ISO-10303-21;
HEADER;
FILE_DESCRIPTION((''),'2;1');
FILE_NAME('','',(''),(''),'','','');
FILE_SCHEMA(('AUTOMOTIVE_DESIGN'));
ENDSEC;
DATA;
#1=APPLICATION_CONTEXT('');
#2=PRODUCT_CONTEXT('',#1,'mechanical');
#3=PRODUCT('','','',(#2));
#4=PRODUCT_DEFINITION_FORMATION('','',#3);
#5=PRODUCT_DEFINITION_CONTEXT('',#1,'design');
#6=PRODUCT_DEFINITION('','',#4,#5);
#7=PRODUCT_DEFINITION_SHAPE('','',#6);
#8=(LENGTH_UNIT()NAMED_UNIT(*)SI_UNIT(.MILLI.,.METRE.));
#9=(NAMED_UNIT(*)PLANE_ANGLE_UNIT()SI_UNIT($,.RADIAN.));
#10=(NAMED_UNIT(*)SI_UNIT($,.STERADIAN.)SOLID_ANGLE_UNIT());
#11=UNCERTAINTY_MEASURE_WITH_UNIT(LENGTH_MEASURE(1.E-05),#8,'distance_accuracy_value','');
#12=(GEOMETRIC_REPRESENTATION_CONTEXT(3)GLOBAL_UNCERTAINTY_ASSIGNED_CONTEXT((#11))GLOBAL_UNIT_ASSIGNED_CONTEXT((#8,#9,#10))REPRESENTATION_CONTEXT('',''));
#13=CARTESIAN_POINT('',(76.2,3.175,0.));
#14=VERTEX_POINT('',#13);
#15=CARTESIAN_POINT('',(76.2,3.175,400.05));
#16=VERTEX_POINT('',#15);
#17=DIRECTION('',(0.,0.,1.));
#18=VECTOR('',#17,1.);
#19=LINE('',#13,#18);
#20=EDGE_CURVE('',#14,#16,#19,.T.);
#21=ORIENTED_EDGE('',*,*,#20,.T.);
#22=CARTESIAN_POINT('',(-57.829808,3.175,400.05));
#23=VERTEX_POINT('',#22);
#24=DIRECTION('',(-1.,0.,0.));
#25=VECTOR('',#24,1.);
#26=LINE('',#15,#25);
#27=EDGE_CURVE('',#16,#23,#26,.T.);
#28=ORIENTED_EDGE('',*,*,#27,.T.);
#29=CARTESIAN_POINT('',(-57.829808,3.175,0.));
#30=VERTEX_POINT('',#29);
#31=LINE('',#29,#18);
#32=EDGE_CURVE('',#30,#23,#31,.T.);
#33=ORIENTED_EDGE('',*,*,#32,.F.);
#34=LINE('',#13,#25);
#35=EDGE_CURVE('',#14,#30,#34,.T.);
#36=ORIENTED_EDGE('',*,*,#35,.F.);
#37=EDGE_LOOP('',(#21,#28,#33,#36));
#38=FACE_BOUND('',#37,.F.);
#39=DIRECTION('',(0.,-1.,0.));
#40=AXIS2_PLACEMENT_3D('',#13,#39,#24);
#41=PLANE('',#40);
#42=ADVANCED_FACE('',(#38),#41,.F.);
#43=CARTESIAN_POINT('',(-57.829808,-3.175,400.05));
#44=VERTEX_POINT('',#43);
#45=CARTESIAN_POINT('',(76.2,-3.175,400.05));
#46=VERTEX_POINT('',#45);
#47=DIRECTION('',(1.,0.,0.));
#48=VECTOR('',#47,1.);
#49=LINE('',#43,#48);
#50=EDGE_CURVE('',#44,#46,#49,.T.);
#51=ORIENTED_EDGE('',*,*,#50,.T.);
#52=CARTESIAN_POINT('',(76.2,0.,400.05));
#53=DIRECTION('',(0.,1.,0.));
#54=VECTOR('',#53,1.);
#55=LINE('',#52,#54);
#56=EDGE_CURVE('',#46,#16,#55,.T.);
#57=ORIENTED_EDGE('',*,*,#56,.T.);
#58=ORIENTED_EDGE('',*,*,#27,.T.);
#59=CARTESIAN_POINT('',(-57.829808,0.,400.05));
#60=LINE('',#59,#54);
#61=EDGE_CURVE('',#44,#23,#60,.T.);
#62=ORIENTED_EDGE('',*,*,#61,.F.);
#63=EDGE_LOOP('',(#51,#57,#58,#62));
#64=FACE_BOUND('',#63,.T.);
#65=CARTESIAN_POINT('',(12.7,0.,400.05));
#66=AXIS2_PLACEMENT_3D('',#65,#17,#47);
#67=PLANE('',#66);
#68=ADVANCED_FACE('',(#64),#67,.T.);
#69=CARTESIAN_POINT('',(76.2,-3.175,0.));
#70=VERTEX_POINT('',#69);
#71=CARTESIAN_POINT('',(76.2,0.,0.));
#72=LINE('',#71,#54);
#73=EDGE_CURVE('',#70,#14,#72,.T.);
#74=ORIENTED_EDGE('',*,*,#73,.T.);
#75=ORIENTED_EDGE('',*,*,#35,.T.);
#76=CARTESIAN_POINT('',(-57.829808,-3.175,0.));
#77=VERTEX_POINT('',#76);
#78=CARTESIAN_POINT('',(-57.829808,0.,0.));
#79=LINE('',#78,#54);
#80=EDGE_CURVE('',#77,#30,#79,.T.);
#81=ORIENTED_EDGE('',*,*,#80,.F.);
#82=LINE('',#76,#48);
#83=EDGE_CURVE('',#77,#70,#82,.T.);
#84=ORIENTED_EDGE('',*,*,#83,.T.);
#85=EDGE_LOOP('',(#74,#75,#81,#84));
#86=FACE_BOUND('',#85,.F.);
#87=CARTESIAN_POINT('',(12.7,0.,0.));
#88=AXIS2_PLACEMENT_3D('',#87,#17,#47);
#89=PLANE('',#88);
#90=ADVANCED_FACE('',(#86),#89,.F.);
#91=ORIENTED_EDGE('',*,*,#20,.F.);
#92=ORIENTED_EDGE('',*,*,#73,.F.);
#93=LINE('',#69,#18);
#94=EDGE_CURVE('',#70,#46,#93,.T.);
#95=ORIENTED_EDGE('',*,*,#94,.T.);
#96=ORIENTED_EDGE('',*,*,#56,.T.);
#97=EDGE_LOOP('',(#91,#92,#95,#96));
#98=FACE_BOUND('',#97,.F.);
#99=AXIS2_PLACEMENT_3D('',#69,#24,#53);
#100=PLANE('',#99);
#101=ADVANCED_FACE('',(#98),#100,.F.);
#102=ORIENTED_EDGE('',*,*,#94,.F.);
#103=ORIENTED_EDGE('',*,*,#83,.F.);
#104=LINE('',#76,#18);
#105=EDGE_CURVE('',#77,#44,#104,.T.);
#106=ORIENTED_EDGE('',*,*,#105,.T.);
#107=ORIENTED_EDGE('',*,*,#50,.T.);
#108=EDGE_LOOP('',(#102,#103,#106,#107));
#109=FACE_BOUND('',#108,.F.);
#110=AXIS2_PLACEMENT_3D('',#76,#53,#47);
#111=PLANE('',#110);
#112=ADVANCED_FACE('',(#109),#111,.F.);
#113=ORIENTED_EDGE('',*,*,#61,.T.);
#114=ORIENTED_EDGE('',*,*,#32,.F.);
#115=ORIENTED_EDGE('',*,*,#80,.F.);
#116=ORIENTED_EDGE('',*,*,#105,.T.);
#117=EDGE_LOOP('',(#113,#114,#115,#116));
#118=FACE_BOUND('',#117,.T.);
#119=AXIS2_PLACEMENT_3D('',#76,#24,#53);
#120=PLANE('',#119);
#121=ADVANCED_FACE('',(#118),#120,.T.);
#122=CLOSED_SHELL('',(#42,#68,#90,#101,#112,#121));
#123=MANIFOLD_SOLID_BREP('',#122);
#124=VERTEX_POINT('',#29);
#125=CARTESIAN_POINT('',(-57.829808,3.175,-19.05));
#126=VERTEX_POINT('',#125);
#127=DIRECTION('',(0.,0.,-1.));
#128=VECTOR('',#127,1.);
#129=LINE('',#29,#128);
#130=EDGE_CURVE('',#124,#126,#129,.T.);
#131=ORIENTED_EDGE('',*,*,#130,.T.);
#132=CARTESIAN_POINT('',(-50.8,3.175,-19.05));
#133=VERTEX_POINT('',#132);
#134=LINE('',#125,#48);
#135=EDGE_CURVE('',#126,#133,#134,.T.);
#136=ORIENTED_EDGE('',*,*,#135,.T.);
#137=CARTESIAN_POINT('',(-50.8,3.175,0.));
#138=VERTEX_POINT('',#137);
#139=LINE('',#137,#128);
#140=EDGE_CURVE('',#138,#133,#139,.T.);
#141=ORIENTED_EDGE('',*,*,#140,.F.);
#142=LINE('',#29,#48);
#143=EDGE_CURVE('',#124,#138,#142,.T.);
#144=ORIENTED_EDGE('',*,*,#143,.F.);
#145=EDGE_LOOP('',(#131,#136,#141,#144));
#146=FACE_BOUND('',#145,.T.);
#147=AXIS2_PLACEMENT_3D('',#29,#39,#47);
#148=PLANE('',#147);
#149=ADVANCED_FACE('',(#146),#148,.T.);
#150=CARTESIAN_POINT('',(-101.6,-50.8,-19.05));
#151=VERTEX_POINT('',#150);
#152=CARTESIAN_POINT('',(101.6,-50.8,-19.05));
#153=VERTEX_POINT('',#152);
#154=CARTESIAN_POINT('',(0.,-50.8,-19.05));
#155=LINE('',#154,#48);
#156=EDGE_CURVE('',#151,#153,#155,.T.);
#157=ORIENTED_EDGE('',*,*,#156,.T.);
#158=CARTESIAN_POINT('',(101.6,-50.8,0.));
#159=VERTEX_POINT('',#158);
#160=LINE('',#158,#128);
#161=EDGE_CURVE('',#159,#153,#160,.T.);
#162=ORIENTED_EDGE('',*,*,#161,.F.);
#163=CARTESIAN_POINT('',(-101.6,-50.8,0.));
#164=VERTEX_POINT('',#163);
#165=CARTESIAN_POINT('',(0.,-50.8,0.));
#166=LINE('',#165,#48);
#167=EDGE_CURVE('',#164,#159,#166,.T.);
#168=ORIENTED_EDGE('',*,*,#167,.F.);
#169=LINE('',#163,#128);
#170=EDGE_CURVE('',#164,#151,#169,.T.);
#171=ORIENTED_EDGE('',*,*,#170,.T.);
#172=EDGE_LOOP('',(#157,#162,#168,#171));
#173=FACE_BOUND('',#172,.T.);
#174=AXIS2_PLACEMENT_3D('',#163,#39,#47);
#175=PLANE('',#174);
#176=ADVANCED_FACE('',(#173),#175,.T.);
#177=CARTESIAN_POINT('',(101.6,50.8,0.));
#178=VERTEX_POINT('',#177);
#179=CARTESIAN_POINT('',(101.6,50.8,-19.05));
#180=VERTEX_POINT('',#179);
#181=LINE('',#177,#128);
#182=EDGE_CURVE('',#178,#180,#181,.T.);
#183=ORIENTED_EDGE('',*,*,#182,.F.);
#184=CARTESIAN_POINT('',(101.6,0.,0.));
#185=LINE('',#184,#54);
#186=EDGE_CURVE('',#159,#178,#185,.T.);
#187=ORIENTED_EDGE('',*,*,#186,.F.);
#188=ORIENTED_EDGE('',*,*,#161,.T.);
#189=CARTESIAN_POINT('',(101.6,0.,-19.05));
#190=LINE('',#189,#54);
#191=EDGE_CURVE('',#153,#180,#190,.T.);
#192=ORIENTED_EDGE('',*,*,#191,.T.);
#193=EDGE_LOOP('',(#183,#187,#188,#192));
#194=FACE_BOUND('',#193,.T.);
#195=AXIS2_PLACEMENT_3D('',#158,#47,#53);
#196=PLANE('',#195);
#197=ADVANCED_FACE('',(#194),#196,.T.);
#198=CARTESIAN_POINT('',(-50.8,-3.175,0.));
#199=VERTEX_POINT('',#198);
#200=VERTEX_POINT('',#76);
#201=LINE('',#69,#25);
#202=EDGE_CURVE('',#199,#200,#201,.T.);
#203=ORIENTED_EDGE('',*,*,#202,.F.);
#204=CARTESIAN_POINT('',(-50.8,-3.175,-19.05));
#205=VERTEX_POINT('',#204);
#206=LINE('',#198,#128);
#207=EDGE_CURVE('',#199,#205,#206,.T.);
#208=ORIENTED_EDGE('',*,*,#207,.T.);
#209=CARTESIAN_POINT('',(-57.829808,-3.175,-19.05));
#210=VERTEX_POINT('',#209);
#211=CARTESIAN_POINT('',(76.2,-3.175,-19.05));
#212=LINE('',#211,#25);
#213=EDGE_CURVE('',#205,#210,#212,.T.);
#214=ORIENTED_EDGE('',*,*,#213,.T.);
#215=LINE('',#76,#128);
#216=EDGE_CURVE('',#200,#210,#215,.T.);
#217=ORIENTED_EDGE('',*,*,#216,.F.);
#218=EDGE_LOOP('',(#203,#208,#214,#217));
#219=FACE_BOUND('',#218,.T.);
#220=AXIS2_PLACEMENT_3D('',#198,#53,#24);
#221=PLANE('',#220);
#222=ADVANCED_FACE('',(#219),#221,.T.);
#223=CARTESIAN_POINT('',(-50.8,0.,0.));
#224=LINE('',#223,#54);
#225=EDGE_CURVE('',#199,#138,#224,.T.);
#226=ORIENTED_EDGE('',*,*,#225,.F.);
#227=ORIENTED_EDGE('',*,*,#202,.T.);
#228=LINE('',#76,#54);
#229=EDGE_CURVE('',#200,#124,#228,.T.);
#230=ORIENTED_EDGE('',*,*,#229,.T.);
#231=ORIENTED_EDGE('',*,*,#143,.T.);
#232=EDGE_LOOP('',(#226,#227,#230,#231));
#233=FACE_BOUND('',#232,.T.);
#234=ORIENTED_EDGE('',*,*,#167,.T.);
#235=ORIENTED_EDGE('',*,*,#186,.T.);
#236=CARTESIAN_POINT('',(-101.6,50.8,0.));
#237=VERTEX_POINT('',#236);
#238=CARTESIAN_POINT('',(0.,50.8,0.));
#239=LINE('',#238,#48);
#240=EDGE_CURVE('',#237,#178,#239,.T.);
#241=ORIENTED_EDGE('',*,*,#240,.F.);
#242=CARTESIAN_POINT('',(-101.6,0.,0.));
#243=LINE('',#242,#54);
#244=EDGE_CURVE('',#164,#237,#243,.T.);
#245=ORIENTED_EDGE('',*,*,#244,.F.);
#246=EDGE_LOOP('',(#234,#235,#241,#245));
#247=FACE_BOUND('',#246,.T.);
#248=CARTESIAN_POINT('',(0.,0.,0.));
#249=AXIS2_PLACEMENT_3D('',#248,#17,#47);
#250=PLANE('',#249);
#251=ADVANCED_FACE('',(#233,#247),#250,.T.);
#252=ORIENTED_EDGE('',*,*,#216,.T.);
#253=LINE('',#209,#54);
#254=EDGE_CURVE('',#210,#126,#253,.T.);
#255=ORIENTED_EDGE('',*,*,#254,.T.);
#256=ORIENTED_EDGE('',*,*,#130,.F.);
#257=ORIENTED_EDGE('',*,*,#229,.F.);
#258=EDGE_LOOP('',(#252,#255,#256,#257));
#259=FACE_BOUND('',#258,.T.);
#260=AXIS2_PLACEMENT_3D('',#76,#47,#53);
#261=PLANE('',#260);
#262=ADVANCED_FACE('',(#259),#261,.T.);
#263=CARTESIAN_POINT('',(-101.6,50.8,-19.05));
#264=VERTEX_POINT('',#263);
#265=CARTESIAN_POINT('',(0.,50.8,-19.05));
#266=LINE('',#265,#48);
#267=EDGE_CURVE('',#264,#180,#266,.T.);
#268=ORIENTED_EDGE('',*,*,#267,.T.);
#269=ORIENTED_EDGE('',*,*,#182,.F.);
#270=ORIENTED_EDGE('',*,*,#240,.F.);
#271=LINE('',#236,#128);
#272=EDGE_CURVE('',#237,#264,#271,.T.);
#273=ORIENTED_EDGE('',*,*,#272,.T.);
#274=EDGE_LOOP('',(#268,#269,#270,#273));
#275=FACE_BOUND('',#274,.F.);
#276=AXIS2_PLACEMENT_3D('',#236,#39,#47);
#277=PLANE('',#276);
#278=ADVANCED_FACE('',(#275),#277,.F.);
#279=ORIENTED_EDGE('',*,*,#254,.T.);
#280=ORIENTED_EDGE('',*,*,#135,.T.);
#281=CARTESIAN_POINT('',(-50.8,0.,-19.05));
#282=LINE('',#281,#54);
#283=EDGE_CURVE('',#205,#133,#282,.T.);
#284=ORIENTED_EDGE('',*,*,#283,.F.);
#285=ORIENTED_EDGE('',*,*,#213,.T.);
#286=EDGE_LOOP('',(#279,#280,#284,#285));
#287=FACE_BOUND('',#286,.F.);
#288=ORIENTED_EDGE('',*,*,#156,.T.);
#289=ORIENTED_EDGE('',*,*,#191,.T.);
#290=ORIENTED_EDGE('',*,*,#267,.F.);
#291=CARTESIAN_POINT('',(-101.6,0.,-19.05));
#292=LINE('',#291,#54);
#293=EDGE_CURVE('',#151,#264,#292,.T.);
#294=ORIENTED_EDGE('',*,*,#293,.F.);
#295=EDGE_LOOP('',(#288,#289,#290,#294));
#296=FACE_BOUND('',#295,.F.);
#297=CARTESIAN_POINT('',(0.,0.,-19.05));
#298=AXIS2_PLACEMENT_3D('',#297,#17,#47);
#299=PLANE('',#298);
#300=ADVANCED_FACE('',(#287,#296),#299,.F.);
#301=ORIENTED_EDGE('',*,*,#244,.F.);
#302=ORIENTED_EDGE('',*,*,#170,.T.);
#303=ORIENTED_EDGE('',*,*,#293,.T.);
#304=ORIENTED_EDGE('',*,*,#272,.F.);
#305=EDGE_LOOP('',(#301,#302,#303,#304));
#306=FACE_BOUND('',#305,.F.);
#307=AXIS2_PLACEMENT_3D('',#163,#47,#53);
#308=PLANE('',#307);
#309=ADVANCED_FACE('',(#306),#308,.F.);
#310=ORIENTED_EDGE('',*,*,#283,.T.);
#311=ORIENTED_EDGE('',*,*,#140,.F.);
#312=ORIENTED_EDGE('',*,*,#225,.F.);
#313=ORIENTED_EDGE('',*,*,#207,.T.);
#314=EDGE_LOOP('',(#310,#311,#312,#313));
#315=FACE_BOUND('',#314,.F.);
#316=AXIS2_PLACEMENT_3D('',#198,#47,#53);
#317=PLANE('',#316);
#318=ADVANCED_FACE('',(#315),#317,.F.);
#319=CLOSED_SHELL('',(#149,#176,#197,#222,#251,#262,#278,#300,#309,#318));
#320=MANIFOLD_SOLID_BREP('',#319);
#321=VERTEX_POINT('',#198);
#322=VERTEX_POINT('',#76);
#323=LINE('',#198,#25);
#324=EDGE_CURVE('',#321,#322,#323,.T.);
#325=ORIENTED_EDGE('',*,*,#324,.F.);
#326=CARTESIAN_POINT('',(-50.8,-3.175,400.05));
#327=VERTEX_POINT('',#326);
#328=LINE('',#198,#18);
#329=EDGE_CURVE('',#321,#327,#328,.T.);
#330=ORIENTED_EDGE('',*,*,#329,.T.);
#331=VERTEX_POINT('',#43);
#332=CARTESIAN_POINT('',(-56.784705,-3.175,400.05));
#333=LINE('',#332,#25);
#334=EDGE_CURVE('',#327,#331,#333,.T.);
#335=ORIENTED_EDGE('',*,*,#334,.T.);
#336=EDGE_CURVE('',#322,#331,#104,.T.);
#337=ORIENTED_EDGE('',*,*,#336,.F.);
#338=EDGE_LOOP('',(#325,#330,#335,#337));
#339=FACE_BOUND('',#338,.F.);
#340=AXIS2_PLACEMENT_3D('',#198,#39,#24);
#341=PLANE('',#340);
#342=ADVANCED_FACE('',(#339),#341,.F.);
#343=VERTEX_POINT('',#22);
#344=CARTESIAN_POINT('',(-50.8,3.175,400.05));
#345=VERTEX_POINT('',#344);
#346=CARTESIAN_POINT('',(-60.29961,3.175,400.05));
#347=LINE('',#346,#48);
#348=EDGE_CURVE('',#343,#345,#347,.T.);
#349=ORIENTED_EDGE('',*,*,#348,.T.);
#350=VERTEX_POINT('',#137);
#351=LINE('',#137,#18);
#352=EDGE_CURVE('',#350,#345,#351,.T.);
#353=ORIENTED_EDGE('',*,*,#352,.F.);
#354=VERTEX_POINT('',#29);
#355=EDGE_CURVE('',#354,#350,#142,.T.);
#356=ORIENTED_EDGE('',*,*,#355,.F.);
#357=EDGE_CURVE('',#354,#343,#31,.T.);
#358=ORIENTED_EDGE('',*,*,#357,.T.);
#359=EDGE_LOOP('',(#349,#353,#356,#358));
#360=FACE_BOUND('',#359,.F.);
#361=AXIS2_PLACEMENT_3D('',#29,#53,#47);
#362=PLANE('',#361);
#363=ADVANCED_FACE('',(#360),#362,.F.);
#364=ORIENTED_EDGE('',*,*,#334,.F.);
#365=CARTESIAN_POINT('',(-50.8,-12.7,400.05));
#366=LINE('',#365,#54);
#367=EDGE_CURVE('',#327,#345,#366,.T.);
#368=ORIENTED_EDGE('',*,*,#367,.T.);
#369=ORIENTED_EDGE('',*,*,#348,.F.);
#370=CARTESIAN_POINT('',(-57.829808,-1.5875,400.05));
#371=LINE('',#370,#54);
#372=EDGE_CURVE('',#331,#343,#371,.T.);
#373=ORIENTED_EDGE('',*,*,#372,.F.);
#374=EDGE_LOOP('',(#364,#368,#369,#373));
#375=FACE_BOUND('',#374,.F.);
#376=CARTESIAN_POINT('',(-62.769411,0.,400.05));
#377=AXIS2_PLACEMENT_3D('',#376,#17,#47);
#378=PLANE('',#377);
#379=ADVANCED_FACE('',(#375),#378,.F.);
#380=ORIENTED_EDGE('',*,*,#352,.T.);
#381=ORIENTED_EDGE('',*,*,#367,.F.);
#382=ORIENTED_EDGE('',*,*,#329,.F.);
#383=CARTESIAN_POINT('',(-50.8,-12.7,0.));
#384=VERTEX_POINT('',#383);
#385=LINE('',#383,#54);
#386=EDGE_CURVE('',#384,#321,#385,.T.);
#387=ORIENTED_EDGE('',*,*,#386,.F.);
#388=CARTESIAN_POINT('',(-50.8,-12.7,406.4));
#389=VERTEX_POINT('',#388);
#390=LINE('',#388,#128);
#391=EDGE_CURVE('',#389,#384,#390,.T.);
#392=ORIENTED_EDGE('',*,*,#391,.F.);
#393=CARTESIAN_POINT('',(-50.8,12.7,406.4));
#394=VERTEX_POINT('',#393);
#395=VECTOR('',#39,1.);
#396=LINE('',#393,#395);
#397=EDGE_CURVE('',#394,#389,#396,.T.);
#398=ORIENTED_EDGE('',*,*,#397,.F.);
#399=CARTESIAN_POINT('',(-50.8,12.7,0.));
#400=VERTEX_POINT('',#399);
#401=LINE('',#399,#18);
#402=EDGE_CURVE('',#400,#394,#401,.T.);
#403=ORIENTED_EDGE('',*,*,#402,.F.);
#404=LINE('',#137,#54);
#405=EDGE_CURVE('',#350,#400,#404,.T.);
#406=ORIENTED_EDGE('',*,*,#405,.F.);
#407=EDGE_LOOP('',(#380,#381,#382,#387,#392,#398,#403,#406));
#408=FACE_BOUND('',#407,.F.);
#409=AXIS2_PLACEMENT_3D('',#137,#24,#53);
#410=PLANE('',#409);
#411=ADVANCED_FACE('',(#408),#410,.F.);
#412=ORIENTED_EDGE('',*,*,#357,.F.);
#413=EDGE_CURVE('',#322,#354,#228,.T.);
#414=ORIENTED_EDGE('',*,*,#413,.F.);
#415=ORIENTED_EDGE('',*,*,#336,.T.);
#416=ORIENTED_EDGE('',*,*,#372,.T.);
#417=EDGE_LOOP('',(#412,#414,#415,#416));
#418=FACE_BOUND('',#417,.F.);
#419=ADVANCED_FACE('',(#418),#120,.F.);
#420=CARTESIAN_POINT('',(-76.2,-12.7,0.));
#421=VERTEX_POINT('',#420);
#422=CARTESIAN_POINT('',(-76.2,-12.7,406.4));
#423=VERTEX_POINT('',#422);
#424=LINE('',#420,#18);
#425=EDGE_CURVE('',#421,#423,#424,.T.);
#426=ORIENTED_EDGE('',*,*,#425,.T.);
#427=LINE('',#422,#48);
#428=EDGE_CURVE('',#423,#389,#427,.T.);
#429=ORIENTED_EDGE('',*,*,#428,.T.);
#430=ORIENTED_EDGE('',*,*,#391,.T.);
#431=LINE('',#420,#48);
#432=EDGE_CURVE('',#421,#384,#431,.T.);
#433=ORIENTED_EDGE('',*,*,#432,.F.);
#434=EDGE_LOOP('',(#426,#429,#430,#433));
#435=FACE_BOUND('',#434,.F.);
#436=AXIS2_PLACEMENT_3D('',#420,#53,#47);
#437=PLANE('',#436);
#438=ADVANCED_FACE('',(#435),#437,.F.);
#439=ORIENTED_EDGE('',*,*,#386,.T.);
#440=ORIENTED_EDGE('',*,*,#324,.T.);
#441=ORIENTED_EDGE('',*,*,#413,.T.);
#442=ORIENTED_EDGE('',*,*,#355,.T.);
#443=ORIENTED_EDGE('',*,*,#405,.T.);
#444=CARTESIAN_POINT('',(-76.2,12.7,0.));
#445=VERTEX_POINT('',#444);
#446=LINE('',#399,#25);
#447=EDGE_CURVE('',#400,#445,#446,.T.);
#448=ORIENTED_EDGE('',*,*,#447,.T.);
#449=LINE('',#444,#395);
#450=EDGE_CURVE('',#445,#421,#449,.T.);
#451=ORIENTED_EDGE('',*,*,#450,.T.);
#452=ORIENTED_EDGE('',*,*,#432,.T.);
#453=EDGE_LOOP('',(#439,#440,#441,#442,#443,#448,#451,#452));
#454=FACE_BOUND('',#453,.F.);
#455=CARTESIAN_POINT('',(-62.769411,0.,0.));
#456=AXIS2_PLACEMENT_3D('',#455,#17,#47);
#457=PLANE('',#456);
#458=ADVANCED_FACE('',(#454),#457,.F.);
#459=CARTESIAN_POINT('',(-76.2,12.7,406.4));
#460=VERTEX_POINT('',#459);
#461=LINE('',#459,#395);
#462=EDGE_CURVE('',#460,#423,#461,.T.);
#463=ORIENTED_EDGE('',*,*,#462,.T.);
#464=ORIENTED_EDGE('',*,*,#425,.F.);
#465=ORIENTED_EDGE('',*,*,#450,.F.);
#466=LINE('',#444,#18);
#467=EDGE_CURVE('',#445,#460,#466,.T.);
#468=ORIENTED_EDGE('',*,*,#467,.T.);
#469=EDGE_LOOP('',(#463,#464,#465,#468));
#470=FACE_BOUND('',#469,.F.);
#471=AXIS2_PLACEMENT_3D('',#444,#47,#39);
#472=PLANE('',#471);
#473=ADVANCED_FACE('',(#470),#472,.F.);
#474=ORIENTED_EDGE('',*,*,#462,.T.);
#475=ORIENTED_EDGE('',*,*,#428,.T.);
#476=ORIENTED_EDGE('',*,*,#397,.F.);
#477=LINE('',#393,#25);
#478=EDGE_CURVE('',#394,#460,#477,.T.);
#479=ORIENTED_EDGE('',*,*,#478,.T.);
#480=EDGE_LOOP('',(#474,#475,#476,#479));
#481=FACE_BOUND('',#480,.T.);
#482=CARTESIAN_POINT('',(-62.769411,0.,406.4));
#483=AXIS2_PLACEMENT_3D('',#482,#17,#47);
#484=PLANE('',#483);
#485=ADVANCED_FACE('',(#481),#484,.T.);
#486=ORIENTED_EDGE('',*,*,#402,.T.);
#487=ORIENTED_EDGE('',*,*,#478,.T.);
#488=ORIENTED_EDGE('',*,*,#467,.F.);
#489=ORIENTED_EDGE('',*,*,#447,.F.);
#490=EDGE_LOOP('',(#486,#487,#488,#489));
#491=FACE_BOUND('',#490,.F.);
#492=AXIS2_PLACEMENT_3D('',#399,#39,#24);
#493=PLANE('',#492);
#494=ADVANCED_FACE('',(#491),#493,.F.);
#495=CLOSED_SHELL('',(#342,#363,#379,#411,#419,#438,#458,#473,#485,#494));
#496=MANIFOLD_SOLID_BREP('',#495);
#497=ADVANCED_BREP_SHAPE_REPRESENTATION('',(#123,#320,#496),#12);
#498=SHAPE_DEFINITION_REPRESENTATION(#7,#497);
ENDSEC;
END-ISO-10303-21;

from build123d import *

# Parameters (mm, degrees)
F0_W     = 203.2
F0_H     = 101.6
F0_W_2   = 127
F0_H_2   = 6.35
F1_DEPTH = 19.05
F2_DEPTH = 406.4
F0_W_3   = 7.0298084438
F3_DEPTH = 400.05
F4_W     = 7.0298084438
F4_H     = 6.35
F5_DEPTH = 6.35


with BuildPart() as f1:
    # F0 (on Top) → F1 (new body)
    with BuildSketch(Plane.XY):
        Rectangle(F0_W, F0_H)
        Polygon((-76.2, 12.7), (-50.8, 12.7), (-50.8, 3.175), (76.2, 3.175), (76.2, -3.175), (-50.8, -3.175), (-50.8, -12.7), (-76.2, -12.7), align=None, mode=Mode.SUBTRACT)
        Polygon((-50.8, 3.175), (-50.8, 12.7), (-76.2, 12.7), (-76.2, -12.7), (-50.8, -12.7), (-50.8, -3.175), (-57.8298084438, -3.175), (-57.8298084438, 3.175), align=None)
        with Locations((12.7, 0)):
            Rectangle(F0_W_2, F0_H_2)
    extrude(amount=-F1_DEPTH)


with BuildPart() as f2:
    # F0 (on Top) → F2 (new body)
    with BuildSketch(Plane.XY):
        Polygon((-50.8, 3.175), (-50.8, 12.7), (-76.2, 12.7), (-76.2, -12.7), (-50.8, -12.7), (-50.8, -3.175), (-57.8298084438, -3.175), (-57.8298084438, 3.175), align=None)
    extrude(amount=F2_DEPTH)

    # F4 (on face) → F5 (join)
    with BuildSketch(Plane.XY.offset(406.4)):
        Polygon((-57.8298084438, -3.175), (-57.8298084438, 3.175), (-50.8, 3.175), (-50.8, 12.7), (-76.2, 12.7), (-76.2, -12.7), (-50.8, -12.7), (-50.8, -3.175), align=None)
        with Locations((-54.3149042219, 0)):
            Rectangle(F4_W, F4_H)
    extrude(amount=-F5_DEPTH)


with BuildPart() as f3:
    # F0 (on Top) → F3 (new body)
    with BuildSketch(Plane.XY):
        with Locations((12.7, 0)):
            Rectangle(F0_W_2, F0_H_2)
        with Locations((-54.3149042219, 0)):
            Rectangle(F0_W_3, F0_H_2)
    extrude(amount=F3_DEPTH)


solid = Compound([f1.part, f2.part, f3.part])
